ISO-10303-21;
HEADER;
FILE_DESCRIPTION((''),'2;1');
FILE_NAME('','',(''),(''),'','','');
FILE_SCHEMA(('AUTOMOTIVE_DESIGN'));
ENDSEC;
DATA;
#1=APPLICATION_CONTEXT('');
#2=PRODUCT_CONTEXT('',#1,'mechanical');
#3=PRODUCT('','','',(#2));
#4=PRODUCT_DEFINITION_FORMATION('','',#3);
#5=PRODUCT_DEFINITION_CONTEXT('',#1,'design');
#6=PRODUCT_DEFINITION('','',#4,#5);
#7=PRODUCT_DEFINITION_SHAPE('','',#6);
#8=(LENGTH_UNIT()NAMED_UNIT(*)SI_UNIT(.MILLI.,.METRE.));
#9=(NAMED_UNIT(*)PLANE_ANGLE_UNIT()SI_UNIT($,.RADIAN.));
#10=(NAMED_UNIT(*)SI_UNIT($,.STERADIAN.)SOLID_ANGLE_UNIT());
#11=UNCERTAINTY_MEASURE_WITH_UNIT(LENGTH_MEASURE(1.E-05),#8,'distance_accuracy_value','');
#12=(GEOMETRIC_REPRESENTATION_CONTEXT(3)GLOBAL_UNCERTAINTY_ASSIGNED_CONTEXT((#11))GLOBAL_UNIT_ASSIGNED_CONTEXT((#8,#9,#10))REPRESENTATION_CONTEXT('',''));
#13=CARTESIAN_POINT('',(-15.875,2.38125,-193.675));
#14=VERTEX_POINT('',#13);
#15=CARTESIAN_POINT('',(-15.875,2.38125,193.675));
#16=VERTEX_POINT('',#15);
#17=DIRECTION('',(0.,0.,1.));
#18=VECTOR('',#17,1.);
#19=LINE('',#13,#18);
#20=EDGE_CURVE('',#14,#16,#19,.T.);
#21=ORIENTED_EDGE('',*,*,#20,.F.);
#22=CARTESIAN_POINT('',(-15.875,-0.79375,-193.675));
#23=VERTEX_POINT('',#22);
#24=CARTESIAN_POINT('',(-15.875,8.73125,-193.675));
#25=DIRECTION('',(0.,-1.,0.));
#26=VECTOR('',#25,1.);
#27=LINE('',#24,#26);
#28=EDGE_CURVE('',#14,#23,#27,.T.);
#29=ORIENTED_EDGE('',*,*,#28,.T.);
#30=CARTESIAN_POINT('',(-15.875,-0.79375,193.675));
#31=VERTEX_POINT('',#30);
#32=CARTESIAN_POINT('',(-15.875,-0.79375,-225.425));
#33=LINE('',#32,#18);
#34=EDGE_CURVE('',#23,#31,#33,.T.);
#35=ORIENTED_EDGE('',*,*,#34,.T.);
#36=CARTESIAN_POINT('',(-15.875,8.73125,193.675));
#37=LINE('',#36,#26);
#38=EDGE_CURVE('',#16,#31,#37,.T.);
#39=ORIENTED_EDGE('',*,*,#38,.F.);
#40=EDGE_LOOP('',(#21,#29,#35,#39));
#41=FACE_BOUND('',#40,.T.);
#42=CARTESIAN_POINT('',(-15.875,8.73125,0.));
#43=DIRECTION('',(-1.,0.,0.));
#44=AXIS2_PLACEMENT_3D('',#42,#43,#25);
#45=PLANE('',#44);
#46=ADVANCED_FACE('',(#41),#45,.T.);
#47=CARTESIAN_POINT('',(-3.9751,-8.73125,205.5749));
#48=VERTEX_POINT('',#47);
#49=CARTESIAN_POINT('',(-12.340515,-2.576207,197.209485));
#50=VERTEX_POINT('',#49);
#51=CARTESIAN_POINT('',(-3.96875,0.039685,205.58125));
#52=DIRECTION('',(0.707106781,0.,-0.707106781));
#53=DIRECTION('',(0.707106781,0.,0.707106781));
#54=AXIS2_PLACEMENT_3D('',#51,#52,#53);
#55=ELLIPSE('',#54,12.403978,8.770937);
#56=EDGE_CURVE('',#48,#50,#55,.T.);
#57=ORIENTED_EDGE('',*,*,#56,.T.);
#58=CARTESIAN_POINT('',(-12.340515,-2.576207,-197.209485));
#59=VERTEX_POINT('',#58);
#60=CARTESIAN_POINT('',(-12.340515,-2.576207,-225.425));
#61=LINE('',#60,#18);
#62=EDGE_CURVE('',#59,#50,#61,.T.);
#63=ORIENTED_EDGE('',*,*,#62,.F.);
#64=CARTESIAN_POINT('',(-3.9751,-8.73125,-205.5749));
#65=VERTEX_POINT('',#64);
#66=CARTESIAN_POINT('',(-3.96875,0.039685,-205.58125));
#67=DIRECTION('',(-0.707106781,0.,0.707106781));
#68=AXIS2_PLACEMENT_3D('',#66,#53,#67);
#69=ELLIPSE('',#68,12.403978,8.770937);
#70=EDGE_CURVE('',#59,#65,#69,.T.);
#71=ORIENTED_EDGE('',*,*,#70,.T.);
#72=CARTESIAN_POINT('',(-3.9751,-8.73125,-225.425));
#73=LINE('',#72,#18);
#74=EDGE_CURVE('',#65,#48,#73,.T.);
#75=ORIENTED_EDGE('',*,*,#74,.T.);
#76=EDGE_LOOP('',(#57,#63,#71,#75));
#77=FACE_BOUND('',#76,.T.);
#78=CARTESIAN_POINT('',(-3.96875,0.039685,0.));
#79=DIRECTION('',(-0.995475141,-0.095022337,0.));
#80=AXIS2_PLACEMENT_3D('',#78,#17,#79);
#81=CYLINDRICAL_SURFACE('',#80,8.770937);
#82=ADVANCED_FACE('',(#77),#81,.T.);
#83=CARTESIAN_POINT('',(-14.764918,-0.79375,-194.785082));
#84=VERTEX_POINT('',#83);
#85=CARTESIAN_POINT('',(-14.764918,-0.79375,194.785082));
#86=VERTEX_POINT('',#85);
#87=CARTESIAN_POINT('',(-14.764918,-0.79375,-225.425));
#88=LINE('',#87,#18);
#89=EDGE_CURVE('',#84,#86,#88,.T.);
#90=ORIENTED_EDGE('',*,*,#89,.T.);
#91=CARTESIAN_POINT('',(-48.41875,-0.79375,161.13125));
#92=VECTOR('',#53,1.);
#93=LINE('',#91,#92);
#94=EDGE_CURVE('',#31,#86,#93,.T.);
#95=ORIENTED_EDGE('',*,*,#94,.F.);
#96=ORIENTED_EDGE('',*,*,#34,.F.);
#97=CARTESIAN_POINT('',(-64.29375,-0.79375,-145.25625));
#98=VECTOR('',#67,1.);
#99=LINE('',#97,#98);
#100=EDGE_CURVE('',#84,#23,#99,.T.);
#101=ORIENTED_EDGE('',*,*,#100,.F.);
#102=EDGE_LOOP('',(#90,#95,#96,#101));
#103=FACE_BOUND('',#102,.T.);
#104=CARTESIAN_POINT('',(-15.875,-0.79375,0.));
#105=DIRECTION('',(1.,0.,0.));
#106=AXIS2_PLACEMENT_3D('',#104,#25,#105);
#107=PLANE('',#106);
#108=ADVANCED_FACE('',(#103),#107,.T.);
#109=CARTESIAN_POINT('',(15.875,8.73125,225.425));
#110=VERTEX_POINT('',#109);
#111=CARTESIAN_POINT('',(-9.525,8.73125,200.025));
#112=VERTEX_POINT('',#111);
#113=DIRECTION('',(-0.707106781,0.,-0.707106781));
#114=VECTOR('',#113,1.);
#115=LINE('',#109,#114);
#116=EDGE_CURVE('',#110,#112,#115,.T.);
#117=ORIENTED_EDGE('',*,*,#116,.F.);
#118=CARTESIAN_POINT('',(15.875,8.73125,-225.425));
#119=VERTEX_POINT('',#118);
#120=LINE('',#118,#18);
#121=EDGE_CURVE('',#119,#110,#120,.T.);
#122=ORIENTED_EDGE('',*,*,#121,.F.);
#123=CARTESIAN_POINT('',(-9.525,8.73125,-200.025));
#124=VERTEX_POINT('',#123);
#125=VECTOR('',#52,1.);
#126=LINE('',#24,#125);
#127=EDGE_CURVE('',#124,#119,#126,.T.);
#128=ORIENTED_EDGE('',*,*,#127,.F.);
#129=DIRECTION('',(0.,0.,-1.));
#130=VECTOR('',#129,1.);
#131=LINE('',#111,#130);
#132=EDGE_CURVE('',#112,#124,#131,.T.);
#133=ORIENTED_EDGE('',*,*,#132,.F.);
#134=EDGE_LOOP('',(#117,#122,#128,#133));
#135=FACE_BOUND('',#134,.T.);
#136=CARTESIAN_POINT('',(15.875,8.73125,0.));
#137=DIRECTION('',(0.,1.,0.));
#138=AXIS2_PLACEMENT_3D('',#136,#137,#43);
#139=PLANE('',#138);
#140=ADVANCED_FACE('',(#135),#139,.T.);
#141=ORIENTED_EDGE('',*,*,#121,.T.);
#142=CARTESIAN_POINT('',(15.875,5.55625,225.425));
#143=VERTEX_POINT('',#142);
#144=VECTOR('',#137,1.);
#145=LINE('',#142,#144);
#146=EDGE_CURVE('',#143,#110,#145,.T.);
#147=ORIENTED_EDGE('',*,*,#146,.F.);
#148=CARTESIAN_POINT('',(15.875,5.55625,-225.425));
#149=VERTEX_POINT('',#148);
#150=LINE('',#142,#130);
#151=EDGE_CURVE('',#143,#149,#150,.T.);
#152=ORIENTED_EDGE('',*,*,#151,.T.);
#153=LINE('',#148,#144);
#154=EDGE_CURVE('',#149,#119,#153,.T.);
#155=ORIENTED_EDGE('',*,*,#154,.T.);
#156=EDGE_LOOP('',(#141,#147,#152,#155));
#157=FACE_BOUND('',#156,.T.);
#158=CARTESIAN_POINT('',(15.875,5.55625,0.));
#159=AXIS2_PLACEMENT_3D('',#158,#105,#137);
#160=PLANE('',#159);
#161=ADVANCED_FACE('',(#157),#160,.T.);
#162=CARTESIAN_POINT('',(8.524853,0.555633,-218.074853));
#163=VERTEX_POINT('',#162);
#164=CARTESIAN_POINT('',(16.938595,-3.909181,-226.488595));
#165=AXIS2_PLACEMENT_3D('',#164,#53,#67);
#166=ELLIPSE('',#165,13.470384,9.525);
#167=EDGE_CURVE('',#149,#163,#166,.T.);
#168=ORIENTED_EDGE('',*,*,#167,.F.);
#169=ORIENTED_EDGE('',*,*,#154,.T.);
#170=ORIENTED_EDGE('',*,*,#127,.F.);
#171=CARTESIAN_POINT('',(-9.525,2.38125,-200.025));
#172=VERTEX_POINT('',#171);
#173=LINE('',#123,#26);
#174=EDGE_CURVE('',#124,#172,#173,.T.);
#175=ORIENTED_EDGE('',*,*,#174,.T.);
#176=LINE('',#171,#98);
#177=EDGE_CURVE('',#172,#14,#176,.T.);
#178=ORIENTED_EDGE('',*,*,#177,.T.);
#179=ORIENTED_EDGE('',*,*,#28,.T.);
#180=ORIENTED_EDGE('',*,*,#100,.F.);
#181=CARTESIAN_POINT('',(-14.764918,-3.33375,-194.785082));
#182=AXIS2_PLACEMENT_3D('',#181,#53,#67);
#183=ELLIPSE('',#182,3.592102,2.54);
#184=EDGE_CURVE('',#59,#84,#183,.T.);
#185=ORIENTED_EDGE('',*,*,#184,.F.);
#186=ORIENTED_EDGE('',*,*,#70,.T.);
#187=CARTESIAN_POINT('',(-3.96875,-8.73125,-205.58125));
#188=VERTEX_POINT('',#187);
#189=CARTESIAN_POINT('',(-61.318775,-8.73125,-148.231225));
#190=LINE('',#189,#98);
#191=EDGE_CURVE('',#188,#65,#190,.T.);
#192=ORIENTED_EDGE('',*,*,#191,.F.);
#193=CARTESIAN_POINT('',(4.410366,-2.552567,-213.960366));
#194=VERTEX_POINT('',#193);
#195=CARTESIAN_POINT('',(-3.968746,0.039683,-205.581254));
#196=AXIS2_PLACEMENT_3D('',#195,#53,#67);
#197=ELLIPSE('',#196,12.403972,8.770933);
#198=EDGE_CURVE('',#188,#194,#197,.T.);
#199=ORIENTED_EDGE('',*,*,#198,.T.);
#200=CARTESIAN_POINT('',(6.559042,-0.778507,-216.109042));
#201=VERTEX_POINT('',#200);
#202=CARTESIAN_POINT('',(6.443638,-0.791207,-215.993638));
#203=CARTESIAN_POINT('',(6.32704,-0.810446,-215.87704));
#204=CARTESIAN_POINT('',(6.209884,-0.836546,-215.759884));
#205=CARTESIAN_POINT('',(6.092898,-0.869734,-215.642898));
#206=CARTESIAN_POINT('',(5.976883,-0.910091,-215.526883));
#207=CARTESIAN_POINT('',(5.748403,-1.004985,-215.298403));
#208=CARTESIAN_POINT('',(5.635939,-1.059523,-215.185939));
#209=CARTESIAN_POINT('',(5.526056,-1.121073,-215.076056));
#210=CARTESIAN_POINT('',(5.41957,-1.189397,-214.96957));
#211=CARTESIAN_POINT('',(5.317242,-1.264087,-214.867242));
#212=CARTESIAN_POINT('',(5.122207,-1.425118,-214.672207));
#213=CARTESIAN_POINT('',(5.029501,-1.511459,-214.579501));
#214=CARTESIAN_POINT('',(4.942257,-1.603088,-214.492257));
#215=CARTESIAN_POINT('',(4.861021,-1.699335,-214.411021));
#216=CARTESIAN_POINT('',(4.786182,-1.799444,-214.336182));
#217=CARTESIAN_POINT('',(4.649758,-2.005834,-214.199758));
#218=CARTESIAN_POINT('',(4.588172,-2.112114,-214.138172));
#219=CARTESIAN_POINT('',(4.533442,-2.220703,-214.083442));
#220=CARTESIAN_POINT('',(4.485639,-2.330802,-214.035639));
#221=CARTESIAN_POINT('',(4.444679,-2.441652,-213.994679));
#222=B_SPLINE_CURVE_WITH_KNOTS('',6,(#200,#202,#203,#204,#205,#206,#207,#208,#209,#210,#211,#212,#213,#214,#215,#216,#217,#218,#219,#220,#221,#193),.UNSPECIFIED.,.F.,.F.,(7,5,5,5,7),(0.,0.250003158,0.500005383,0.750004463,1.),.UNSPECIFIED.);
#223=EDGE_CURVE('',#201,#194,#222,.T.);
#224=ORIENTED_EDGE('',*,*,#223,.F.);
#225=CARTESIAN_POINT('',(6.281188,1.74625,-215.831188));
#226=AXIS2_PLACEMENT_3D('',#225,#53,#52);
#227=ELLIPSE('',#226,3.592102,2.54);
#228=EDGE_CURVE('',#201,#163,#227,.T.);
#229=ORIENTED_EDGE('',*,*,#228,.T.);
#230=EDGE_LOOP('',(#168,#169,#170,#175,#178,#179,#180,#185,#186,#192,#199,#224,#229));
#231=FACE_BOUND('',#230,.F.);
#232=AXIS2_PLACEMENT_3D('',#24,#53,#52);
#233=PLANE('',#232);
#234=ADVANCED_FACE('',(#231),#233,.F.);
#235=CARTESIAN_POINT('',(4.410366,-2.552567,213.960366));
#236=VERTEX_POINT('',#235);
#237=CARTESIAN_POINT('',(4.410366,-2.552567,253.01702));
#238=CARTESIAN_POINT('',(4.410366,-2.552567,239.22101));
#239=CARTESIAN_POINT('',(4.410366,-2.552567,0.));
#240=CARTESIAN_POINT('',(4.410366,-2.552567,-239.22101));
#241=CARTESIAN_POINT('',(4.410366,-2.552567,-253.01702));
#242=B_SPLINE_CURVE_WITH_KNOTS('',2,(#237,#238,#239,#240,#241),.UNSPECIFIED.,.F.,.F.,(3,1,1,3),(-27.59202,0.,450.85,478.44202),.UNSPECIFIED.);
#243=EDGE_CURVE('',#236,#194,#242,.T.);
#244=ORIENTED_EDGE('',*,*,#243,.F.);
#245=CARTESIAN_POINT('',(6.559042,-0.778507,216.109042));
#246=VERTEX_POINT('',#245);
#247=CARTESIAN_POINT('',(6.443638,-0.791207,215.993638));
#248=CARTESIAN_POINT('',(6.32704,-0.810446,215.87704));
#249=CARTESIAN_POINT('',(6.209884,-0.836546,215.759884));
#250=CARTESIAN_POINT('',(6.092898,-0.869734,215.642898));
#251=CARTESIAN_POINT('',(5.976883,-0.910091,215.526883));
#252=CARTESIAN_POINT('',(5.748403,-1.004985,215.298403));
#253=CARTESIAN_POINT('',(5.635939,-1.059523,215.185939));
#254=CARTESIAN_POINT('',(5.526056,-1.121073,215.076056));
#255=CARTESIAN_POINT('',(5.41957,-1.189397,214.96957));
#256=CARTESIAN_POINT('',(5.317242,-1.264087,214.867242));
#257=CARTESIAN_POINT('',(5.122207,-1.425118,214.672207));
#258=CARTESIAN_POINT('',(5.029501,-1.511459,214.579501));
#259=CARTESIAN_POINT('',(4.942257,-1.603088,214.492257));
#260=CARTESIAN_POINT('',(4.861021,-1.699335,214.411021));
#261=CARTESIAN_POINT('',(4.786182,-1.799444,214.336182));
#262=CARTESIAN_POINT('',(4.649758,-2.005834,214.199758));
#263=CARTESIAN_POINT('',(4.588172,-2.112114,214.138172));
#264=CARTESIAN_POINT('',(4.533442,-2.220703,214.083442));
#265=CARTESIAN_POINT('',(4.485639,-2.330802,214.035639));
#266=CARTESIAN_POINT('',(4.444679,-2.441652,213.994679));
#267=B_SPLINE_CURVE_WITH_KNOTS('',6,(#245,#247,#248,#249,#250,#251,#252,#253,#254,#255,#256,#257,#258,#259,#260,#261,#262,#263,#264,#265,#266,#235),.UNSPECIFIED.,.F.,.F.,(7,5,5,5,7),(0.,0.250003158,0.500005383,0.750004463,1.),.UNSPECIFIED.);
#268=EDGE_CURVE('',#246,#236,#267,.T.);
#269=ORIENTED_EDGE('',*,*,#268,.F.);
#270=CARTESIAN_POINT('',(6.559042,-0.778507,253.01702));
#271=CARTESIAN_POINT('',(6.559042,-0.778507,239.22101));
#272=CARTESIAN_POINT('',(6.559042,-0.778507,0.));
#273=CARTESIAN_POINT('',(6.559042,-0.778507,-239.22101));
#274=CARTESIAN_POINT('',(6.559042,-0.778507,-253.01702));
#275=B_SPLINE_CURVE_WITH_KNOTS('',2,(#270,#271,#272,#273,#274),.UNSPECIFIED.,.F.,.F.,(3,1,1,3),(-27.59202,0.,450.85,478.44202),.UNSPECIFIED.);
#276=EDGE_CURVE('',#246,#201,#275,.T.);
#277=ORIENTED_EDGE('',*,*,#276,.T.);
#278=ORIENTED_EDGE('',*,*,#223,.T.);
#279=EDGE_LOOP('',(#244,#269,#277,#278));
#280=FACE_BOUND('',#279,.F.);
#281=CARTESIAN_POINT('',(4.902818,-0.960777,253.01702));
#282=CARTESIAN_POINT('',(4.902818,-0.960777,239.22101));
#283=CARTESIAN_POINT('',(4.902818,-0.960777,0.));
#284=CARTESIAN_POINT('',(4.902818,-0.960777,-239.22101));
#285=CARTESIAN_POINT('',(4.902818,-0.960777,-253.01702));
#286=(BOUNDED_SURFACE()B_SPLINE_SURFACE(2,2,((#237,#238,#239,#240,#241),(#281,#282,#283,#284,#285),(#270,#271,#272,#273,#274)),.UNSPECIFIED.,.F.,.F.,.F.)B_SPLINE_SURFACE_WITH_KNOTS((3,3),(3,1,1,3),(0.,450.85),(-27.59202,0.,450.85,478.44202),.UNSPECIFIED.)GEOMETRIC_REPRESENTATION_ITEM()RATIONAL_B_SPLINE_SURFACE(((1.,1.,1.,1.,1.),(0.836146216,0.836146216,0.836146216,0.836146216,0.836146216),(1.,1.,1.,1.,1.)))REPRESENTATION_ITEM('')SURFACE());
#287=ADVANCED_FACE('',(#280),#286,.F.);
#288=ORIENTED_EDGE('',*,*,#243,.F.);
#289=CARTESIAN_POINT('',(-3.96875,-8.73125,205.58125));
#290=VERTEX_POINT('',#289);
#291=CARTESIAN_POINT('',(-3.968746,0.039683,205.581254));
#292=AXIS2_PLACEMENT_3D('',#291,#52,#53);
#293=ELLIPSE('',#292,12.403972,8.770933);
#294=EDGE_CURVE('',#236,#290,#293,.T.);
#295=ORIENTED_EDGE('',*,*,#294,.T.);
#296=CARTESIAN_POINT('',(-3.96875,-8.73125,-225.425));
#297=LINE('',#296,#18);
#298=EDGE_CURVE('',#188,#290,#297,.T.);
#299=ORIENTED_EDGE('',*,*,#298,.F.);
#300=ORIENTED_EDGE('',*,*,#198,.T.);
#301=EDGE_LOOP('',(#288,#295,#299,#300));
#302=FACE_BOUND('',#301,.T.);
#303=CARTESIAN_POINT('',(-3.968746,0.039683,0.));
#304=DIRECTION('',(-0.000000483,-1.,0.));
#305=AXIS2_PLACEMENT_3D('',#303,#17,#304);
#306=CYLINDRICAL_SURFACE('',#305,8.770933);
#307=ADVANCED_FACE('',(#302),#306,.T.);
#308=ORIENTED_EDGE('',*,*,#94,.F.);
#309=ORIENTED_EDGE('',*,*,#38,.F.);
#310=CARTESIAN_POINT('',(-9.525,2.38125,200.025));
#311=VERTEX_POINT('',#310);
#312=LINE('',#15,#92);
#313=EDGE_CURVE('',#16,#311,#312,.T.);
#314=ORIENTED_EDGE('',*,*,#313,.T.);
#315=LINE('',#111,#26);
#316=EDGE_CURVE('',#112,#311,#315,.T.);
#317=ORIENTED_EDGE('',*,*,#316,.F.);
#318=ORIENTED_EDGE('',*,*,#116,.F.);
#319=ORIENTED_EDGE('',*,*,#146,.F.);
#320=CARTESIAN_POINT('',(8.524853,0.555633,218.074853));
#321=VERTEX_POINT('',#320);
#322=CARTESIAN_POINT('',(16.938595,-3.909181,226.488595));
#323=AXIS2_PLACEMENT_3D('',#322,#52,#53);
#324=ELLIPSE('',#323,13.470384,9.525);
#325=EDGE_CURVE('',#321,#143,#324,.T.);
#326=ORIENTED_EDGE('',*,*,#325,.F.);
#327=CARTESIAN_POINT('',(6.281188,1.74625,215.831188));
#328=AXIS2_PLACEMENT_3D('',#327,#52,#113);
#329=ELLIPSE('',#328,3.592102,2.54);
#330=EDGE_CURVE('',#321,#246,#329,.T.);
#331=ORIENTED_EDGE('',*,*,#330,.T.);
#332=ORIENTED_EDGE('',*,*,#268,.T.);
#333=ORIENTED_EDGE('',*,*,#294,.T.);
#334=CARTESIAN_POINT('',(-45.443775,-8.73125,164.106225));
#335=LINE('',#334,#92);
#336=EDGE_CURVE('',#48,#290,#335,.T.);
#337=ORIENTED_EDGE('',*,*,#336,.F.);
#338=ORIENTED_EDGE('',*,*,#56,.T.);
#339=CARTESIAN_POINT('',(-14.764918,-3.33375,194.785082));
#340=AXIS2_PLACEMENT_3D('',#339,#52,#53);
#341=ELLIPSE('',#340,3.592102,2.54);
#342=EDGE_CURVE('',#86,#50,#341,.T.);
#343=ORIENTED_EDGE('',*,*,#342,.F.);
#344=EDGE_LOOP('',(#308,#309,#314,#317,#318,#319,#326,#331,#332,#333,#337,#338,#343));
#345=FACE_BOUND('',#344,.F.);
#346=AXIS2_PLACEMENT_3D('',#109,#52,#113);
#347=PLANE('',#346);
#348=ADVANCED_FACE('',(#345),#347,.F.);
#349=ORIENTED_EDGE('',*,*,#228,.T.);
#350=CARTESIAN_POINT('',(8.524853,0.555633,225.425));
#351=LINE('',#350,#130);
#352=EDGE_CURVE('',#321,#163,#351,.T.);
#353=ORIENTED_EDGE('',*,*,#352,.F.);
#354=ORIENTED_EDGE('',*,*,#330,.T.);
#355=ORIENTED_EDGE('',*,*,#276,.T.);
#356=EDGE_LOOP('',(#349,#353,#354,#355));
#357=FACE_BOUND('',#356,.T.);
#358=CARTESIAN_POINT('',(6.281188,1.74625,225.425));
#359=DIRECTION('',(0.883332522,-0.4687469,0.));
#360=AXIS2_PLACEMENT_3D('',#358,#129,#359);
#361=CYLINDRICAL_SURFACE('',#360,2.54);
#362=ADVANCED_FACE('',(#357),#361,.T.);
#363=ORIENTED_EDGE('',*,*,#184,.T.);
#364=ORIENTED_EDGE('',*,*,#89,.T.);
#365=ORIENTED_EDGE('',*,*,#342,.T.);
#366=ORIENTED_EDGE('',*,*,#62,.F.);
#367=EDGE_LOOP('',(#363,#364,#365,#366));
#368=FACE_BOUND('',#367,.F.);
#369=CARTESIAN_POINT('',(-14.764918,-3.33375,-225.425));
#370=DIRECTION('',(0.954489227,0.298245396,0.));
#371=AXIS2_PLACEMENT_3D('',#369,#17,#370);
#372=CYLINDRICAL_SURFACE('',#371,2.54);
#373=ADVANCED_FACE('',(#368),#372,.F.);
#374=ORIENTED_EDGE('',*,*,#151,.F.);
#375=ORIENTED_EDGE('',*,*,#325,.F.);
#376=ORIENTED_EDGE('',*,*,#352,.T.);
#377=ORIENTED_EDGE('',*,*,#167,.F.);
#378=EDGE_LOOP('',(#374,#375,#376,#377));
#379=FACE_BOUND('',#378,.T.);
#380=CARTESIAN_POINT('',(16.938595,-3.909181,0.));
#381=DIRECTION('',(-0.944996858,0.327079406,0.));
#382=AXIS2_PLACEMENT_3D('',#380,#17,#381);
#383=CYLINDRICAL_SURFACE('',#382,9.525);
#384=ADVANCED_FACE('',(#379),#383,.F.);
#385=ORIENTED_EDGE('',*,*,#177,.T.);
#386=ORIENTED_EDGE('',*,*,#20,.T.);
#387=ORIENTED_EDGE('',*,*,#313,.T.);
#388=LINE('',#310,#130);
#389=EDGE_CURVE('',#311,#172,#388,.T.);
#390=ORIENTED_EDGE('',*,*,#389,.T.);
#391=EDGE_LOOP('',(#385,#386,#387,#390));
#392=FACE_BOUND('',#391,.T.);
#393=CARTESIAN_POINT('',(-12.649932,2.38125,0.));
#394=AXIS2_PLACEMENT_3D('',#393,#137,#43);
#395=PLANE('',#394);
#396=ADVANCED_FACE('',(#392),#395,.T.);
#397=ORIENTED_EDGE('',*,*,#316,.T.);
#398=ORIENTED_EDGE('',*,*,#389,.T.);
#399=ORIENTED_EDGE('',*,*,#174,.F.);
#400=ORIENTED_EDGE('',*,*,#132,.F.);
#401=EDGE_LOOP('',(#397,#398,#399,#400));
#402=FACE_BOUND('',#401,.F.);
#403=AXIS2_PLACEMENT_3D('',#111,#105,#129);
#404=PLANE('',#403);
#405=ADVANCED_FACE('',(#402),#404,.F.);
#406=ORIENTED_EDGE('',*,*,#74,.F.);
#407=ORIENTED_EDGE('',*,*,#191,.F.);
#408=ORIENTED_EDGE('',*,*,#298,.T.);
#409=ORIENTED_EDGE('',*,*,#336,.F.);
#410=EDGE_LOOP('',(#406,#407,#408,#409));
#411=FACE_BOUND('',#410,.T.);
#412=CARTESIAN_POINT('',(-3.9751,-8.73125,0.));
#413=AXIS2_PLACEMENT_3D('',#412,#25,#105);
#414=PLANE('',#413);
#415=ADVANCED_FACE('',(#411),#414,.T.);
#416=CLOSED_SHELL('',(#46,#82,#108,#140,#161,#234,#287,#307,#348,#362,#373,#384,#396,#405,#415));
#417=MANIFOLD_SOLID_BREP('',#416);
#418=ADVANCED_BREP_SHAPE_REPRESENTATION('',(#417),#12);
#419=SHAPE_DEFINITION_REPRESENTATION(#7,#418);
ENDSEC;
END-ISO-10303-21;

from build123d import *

# Parameters (mm, degrees)
F1_DEPTH = 225.425
F2_R     = 2.54
F3_R     = 2.54
F4_R     = 2.54
F6_DEPTH = 17.4635001
F8_DEPTH = 6.35


# Not quite as in the source:
# - ends of sketch curves that miss each other by under 0.0002 mm in the source are joined


with BuildPart() as f1:
    # F0 (on Top) → F1 (new body, symmetric)
    with BuildSketch(Plane.XY):
        with BuildLine():
            Line((15.875, 5.55625), (15.875, 8.73125))
            Line((15.875, 8.73125), (-15.875, 8.73125))
            Line((-15.875, 8.73125), (-15.875, -0.79375))
            Line((-15.875, -0.79375), (-12.7, -0.79375))
            ThreePointArc((-12.7, -0.79375), (-9.8710707302, -6.4481459867), (-3.9751, -8.73125))
            Line((-3.9751, -8.73125), (-3.96875, -8.73125))
            ThreePointArc((-3.96875, -8.73125), (1.9312218072, -6.4502821485), (4.7625, -0.79375))
            Line((4.7625, -0.79375), (7.9375, -0.79375))
            ThreePointArc((7.9375, -0.79375), (10.9883747468, 3.5285940665), (15.875, 5.55625))
        make_face()
    extrude(amount=F1_DEPTH, both=True)

    # F2
    f2_edges = [f1.edges().sort_by_distance(p)[0] for p in [
        (7.9375, -0.79375, 0),
    ]]
    fillet(f2_edges, radius=F2_R)

    # F3
    f3_edges = [f1.edges().sort_by_distance(p)[0] for p in [
        (-12.7, -0.79375, 0),
    ]]
    fillet(f3_edges, radius=F3_R)

    # F4
    f4_edges = [f1.edges().sort_by_distance(p)[0] for p in [
        (4.7625, -0.79375, 0),
    ]]
    fillet(f4_edges, radius=F4_R)

    # F5 (on face) → F6 (cut, through all)
    with BuildSketch(Plane(origin=(0, 8.73125, 0), x_dir=(-1, 0, 0), z_dir=(0, 1, 0))):
        Polygon((15.875, 225.425), (-15.875, 225.425), (15.875, 193.675), align=None)
        Polygon((15.875, -193.675), (-15.875, -225.425), (15.875, -225.425), align=None)
    extrude(amount=-F6_DEPTH, mode=Mode.SUBTRACT)

    # F7 (on face) → F8 (cut)
    with BuildSketch(Plane(origin=(0, 8.73125, 0), x_dir=(-1, 0, 0), z_dir=(0, 1, 0))):
        Polygon((15.875, 193.675), (9.525, 200.025), (9.525, -200.025), (15.875, -193.675), align=None)
    extrude(amount=-F8_DEPTH, mode=Mode.SUBTRACT)


solid = f1.part
